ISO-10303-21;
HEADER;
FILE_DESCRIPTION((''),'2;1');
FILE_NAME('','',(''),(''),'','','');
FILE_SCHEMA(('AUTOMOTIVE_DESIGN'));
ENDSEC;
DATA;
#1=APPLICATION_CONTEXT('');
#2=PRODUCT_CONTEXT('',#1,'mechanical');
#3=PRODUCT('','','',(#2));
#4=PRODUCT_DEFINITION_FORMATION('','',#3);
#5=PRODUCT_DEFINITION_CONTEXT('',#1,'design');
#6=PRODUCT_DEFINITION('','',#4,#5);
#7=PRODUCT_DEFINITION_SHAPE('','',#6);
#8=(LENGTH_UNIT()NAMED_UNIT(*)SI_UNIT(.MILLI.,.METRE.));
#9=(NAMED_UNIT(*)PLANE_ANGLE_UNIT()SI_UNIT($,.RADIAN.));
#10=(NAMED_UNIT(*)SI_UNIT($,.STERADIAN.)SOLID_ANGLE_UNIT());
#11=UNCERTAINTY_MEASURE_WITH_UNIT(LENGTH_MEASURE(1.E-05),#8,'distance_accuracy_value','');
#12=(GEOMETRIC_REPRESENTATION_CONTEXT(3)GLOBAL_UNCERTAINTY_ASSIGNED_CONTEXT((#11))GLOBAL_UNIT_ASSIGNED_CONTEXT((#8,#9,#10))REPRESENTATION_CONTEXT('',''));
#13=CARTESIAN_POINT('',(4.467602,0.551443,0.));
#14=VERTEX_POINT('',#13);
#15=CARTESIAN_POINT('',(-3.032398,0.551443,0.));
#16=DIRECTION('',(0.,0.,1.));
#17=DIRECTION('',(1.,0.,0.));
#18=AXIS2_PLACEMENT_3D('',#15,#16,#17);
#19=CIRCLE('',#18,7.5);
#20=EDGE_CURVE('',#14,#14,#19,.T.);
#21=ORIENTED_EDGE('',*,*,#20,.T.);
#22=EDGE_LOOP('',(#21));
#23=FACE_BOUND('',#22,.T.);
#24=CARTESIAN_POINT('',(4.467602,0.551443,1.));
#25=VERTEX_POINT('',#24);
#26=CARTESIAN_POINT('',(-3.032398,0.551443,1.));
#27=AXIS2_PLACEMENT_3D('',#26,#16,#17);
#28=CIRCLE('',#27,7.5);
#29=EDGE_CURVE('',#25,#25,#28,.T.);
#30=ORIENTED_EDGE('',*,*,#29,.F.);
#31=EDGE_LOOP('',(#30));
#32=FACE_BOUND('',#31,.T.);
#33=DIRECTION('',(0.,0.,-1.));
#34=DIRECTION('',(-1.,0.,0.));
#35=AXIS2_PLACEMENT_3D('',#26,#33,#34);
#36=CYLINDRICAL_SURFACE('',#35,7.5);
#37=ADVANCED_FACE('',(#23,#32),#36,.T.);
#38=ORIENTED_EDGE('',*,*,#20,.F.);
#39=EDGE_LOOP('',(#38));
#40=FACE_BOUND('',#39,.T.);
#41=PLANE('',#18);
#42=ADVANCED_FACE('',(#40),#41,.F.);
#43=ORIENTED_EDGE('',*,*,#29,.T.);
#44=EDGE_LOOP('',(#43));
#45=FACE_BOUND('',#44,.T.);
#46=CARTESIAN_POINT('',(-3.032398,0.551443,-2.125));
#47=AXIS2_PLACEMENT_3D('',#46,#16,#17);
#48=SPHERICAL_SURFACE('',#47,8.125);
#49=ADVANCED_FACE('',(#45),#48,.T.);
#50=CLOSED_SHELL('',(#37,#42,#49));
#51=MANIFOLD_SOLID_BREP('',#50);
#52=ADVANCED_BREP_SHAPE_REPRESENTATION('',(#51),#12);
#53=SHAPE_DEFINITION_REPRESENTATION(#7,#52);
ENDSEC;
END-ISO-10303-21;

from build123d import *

# Parameters (mm, degrees)
SKETCH1_R           = 7.5
BOSS_EXTRUDE1_DEPTH = 1


# Read off the part's stored shape, not the designer's step: Dome1
with BuildPart() as part:
    # Sketch1 → Boss-Extrude1 (new body)
    with BuildSketch(Plane.XY):
        with Locations((-3.032398099, 0.551442744)):
            Circle(SKETCH1_R)
    extrude(amount=BOSS_EXTRUDE1_DEPTH)

    # Dome1 outline → Dome1 (revolve)
    with BuildSketch(Plane(origin=(-3.032398099, 0.551442744, 0), x_dir=(1, 0, 0), z_dir=(0, -1, 0))):
        with BuildLine():
            Line((0, 1), (7.500000003, 0.999999992))
            ThreePointArc((7.500000003, 0.999999992), (4.506939098, 4.635408639), (0, 6))
            Line((0, 6), (0, 1))
        make_face()
    revolve(axis=Axis((-3.032398099, 0.551442744, 0), (0, 0, 1)))


solid = part.part
